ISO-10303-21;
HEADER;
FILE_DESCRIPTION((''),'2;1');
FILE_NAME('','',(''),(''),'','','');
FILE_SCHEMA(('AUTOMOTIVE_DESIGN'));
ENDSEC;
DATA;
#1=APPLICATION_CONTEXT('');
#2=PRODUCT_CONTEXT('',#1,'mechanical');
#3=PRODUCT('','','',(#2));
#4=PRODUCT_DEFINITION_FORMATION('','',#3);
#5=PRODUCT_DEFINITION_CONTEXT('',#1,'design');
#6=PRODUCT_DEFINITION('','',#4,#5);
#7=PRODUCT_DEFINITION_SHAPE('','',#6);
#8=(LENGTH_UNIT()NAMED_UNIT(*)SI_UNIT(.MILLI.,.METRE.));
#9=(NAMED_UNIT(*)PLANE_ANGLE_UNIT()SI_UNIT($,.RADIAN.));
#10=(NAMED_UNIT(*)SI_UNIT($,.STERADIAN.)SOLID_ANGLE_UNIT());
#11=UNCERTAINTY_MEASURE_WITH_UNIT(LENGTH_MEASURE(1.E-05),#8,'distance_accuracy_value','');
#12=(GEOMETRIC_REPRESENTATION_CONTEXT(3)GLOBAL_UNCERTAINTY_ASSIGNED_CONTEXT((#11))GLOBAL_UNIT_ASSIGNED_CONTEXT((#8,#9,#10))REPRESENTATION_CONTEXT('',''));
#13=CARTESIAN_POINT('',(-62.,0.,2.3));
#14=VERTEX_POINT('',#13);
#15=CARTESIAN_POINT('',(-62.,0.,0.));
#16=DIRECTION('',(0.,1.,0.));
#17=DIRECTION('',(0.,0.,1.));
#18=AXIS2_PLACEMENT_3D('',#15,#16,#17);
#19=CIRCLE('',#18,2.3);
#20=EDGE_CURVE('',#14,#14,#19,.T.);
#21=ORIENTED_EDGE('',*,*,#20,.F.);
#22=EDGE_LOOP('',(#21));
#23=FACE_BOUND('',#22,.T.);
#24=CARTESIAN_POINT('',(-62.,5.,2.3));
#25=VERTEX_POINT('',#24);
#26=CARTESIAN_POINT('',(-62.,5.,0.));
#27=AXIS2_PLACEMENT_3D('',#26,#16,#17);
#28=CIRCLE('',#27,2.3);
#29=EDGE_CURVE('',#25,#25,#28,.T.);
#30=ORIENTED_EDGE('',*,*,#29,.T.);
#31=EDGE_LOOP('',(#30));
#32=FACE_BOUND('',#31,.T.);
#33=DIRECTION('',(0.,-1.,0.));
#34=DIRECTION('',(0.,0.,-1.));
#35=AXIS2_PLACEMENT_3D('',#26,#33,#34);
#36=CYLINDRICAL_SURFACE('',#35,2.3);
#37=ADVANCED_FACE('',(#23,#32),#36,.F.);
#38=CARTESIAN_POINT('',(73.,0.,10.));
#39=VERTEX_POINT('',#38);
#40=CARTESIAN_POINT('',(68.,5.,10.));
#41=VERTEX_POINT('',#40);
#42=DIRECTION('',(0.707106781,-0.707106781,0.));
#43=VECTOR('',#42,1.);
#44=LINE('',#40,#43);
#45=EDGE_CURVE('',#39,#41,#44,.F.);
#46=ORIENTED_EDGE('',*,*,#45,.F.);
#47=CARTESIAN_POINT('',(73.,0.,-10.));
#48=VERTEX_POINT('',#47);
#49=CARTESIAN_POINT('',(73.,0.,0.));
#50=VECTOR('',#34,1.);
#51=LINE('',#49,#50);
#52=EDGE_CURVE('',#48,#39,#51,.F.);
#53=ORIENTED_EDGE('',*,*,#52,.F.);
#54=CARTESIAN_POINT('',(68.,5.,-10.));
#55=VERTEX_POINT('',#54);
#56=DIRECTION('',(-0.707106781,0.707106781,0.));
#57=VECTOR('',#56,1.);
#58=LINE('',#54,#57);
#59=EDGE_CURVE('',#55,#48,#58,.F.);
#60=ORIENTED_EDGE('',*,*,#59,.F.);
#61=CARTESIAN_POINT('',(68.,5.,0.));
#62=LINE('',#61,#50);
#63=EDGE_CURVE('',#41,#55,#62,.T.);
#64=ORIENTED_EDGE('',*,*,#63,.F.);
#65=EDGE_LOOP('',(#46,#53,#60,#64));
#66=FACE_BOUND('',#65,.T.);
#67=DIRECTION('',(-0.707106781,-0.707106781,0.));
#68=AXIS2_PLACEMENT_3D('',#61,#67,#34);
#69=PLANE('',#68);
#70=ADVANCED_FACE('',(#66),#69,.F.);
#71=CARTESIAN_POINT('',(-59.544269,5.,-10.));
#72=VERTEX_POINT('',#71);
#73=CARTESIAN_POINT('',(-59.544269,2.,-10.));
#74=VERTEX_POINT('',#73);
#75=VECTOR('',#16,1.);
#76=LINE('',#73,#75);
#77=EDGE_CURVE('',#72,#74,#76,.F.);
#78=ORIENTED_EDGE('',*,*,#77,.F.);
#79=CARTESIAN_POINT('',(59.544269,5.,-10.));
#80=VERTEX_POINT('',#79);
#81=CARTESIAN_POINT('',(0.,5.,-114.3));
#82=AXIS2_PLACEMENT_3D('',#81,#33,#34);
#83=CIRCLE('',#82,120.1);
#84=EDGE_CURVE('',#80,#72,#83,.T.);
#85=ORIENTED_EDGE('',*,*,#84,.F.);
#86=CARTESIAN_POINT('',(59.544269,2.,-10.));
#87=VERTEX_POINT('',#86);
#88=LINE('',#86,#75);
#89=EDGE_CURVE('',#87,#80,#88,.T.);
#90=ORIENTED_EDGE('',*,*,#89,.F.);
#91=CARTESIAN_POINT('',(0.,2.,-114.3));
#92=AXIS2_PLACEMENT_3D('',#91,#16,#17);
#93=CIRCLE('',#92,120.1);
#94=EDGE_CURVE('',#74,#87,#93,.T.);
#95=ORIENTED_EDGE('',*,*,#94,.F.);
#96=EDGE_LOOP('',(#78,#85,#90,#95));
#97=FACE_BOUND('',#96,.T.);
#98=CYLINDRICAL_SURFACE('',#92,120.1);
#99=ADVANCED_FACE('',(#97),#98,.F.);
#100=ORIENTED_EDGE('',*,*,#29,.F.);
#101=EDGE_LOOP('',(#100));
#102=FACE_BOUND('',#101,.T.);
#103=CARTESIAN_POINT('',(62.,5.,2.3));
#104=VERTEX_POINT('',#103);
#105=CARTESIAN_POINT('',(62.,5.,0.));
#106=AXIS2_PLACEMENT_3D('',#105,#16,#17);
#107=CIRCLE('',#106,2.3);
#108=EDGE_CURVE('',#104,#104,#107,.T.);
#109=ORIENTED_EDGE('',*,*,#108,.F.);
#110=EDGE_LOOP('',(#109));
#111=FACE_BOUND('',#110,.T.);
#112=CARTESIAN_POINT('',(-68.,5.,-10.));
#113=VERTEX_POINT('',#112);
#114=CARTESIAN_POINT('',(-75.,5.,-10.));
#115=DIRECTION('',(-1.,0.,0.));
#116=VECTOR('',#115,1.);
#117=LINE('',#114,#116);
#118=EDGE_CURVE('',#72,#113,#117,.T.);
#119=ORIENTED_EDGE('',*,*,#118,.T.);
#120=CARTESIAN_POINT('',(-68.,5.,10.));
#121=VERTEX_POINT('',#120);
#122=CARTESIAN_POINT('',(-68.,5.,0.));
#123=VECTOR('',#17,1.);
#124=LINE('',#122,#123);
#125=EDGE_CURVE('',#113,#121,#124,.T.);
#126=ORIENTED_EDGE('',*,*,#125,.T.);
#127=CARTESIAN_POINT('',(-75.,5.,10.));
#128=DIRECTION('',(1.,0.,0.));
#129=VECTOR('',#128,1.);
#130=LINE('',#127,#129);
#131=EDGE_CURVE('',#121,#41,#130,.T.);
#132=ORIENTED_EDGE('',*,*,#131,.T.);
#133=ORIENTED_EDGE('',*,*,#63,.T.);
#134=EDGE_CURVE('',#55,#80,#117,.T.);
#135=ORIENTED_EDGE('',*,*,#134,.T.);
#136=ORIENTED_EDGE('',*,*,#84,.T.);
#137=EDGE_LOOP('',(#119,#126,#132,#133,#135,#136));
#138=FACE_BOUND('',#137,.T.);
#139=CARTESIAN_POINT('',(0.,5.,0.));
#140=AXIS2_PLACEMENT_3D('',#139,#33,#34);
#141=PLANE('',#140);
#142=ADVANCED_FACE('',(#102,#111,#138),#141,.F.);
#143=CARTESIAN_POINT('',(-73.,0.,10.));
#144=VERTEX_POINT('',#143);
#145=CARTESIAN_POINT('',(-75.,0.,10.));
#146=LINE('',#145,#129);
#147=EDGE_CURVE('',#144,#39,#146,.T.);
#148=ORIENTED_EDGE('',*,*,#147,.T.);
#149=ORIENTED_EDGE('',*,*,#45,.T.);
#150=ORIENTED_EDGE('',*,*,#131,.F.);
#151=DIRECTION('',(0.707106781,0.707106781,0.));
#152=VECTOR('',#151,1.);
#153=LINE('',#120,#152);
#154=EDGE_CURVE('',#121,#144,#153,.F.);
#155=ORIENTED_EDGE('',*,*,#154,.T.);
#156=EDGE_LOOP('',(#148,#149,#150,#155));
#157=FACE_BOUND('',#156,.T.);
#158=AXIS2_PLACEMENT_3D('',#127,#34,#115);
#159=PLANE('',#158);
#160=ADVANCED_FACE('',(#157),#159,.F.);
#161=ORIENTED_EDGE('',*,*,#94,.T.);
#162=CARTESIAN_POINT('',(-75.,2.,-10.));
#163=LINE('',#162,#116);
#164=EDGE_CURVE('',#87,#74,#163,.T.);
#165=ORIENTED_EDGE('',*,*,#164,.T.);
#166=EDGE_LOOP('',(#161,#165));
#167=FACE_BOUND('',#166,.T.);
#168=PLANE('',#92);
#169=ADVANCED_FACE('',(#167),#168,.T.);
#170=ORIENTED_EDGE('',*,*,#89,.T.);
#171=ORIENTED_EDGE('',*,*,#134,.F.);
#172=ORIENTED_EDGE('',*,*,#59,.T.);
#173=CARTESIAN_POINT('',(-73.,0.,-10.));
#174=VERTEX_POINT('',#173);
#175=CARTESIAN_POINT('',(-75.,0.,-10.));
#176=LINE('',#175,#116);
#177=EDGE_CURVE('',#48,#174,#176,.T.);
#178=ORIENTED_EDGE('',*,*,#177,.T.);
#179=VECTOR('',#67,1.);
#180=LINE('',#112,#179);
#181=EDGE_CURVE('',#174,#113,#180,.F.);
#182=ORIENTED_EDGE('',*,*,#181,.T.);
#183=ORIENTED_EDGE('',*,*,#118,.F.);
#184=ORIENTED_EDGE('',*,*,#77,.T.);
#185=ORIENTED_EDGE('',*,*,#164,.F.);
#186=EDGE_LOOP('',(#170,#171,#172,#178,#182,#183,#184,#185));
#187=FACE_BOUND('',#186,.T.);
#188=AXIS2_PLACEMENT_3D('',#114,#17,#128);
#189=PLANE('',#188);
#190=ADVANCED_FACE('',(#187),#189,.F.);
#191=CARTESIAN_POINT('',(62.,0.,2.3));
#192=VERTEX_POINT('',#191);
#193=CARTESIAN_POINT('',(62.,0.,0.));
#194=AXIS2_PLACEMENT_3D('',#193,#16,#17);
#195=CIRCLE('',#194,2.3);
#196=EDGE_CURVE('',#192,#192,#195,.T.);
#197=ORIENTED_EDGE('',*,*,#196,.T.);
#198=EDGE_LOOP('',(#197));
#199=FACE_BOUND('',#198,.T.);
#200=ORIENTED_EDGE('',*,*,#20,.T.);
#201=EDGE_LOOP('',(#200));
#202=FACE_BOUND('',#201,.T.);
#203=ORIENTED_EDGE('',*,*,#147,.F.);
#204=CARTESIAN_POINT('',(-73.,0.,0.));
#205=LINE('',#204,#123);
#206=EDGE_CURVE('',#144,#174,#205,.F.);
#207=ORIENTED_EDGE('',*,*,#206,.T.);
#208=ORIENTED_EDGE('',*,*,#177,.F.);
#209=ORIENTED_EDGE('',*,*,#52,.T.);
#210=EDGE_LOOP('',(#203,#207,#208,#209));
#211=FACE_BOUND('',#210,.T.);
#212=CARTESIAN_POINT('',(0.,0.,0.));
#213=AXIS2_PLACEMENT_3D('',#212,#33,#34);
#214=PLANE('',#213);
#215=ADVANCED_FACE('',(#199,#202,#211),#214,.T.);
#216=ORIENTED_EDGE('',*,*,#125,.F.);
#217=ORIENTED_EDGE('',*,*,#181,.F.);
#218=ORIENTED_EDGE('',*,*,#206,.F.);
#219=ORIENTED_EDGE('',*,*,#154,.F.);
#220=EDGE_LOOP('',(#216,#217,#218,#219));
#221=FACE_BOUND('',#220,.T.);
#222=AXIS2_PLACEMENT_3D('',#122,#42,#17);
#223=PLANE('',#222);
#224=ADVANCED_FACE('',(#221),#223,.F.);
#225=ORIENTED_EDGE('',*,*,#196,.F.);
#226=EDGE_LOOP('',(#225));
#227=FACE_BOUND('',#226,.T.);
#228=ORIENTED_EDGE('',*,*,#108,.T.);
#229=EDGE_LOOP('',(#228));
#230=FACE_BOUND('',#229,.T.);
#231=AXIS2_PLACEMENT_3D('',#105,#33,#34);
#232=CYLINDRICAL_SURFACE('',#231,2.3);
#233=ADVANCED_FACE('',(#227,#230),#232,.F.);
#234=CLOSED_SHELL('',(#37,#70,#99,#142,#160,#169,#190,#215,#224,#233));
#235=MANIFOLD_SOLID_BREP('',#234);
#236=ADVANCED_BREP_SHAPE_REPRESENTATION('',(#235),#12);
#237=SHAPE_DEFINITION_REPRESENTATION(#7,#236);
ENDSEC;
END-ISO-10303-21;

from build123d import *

# Parameters (mm, degrees)
SKETCH1_W           = 150
SKETCH1_H           = 20
BOSS_EXTRUDE1_DEPTH = 5
SKETCH2_R           = 120.1
CUT_EXTRUDE1_DEPTH  = 3
SKETCH3_R           = 2.3
CUT_EXTRUDE4_DEPTH  = 76.828754441
CHAMFER1_SIZE       = 7


with BuildPart() as part:
    # Sketch1 → Boss-Extrude1 (new body)
    with BuildSketch(Plane(origin=(0, 0, 0), x_dir=(1, 0, 0), z_dir=(0, 1, 0))):
        Rectangle(SKETCH1_W, SKETCH1_H)
    extrude(amount=BOSS_EXTRUDE1_DEPTH)

    # Sketch2 → Cut-Extrude1 (cut)
    with BuildSketch(Plane(origin=(0, 5, 0), x_dir=(1, 0, 0), z_dir=(0, 1, 0))):
        with Locations((0, 114.3)):
            Circle(SKETCH2_R)
    extrude(amount=-CUT_EXTRUDE1_DEPTH, mode=Mode.SUBTRACT)

    # Sketch3 → Cut-Extrude4 (cut, through all)
    with BuildSketch(Plane(origin=(0, 0, 0), x_dir=(1, 0, 0), z_dir=(0, 1, 0))):
        with Locations(Location((-62, 0, 0), (0, 0, 270))):
            Circle(SKETCH3_R)
        with Locations(Location((62, 0, 0), (0, 0, 270))):
            Circle(SKETCH3_R)
    extrude(amount=CUT_EXTRUDE4_DEPTH, mode=Mode.SUBTRACT)

    # Chamfer1
    # the kernel refuses this chamfer: 7 mm, written as the material it takes off along each edge
    with BuildSketch(Plane(origin=(75, 5, 28.001780916), x_dir=(0.02749587661058612, -0.9996219169112968, 0), z_dir=(0, 0, -1)), Plane(origin=(-75, 5, -28.001780916), x_dir=(-0.02749587661058612, -0.9996219169112968, 0), z_dir=(0, 0, 1))) as chamfer1_piece_1:
        Polygon((CHAMFER1_SIZE * 0.999621916911, CHAMFER1_SIZE * 0.0274958766106), (-CHAMFER1_SIZE * 0.0274958766106, CHAMFER1_SIZE * 0.999621916911), (0, 0), align=None)
    extrude(amount=56.003561832, mode=Mode.SUBTRACT)


solid = part.part
